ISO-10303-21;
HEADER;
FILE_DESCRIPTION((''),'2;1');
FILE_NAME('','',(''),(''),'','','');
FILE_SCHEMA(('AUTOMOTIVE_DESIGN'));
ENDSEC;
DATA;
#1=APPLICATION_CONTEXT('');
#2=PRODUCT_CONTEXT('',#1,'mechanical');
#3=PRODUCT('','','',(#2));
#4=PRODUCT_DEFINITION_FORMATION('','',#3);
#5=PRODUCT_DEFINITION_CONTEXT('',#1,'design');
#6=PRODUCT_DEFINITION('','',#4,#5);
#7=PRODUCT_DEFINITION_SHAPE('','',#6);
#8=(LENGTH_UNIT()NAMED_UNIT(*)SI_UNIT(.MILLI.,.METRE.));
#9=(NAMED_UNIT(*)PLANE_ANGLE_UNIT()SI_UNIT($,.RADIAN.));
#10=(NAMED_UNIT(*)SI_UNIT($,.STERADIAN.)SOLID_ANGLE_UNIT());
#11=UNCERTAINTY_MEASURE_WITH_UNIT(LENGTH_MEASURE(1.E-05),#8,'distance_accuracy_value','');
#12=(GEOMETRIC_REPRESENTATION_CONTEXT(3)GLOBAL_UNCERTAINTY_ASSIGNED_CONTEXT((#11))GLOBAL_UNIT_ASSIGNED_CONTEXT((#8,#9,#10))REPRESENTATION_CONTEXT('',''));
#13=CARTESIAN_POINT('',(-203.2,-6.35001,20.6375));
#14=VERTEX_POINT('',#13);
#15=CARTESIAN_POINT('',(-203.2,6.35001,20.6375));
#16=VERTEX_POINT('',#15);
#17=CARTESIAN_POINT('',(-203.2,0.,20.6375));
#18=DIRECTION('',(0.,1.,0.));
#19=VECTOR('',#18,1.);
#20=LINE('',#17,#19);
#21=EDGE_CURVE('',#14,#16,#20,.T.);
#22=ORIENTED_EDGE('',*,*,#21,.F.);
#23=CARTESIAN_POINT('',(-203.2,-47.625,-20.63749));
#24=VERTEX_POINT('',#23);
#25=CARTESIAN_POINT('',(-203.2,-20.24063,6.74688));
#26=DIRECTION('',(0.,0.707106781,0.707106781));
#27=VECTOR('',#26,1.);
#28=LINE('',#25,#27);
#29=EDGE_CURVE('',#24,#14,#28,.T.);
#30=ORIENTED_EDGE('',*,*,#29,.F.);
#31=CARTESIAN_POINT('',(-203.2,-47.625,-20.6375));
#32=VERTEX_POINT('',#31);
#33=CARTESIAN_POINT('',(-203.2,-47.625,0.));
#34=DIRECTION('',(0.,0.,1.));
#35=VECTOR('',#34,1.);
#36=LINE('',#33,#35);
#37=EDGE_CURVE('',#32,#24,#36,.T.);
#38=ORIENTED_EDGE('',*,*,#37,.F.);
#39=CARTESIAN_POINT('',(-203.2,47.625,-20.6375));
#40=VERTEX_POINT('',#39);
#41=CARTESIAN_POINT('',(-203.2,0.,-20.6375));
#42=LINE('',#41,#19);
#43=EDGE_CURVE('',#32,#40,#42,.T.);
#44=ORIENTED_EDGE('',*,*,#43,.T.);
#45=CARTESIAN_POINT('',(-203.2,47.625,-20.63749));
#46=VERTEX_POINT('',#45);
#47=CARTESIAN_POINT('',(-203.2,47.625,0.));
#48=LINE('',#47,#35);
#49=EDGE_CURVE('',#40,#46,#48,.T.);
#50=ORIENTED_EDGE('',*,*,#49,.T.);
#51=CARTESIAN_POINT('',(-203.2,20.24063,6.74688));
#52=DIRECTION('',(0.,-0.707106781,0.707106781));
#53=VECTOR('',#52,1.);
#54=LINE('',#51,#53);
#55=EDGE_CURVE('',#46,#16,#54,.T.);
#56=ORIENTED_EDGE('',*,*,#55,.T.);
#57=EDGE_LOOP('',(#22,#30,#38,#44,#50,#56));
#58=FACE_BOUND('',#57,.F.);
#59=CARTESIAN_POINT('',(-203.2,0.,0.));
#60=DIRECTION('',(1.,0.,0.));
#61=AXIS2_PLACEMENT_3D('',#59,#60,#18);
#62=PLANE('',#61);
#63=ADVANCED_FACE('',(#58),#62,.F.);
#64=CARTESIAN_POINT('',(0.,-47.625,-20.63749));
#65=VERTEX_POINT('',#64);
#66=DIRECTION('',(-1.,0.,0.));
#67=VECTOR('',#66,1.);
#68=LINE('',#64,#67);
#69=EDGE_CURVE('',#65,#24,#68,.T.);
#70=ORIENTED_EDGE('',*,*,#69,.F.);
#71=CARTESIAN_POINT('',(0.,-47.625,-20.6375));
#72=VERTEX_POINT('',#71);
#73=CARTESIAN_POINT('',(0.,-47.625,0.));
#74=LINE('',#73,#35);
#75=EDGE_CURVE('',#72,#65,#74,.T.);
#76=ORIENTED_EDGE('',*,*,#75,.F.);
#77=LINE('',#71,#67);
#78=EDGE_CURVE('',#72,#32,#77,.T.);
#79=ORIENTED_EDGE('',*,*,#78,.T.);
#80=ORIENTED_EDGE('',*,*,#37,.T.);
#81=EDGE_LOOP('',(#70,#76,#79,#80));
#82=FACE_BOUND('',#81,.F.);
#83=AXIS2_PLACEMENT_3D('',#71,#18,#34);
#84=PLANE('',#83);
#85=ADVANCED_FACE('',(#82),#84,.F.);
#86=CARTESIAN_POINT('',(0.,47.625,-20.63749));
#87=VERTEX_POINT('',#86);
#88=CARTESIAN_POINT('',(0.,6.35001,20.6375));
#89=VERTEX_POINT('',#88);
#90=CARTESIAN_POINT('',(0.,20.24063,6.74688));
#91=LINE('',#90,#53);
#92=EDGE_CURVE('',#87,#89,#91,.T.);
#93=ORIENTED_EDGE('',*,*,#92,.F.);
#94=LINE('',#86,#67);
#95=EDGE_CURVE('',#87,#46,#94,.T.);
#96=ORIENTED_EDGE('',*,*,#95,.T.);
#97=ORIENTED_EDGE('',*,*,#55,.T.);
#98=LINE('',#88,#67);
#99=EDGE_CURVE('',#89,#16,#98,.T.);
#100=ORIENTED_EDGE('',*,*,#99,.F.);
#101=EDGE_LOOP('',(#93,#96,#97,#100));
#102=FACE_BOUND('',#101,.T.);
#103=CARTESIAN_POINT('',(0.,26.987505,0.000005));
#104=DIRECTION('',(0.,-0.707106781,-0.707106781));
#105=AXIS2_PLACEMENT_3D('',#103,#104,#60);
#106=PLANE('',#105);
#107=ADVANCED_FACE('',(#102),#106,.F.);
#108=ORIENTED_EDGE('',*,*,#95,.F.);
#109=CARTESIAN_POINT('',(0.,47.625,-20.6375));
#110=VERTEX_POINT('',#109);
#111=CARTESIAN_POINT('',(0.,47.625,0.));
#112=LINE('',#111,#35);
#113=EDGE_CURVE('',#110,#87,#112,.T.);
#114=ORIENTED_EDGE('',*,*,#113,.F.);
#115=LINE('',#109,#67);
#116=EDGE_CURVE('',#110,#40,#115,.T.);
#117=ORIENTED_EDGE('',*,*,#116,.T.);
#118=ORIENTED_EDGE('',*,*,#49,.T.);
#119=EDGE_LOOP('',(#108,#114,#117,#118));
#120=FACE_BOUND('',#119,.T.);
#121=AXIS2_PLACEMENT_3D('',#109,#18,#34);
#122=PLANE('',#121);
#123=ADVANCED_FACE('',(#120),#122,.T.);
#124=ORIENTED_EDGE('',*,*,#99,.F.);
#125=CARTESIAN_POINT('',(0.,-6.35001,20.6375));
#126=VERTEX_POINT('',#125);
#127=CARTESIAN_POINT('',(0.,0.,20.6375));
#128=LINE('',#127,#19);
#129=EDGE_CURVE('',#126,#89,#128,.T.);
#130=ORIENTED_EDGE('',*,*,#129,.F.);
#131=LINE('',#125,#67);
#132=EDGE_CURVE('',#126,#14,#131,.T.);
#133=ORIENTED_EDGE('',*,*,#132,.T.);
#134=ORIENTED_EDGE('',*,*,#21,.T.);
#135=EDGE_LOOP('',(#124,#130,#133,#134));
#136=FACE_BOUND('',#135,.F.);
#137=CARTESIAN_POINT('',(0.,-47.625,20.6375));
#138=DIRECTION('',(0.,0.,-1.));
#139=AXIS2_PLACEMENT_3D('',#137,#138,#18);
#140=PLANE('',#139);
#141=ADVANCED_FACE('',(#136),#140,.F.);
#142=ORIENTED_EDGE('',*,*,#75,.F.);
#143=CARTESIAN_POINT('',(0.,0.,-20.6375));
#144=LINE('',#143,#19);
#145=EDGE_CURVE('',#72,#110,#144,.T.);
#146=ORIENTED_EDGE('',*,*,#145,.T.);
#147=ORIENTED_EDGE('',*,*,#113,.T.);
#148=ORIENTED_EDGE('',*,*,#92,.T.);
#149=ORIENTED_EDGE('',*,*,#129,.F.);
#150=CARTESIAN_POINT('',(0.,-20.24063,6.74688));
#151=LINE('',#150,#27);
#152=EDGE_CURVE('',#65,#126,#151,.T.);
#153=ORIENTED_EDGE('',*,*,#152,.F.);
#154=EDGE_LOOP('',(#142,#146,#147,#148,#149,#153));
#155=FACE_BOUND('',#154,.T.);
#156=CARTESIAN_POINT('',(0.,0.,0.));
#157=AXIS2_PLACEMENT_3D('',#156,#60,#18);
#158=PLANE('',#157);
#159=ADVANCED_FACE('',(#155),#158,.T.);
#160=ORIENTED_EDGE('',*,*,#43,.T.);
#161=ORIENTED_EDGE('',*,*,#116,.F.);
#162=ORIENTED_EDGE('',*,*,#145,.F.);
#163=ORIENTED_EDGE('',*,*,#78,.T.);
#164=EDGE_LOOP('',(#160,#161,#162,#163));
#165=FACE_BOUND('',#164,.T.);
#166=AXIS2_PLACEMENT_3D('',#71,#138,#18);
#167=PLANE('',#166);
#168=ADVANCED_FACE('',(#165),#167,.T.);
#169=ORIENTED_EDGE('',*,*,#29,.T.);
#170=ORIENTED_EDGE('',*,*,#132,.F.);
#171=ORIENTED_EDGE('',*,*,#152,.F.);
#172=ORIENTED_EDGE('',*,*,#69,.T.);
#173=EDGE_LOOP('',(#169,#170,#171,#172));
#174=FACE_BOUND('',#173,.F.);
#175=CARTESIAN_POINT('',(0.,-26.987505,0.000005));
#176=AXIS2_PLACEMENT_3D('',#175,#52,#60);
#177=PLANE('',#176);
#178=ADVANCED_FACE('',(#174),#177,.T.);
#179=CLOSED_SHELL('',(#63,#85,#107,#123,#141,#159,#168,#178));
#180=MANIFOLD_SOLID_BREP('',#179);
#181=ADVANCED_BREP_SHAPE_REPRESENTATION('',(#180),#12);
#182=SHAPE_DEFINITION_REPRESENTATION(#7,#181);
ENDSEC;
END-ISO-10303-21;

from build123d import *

# Parameters (mm, degrees)
F0_W     = 95.25
F0_H     = 41.275
F1_DEPTH = 203.2
F2_SIZE  = 41.27499


# Not quite as in the source:
# - a fillet or chamfer is up to 0.001 mm smaller than in the source, because OpenCascade refuses the exact size


with BuildPart() as f1:
    # F0 (on Right) → F1 (new body)
    with BuildSketch(Plane.YZ):
        Rectangle(F0_W, F0_H)
    extrude(amount=-F1_DEPTH)

    # F2 (size 41.275 in the source; OpenCascade refuses exactly that, so slightly less here)
    f2_edges = [f1.edges().sort_by_distance(p)[0] for p in [
        (-101.6, -47.625, 20.6375),
        (-101.6, 47.625, 20.6375),
    ]]
    chamfer(f2_edges, length=F2_SIZE)


solid = f1.part
